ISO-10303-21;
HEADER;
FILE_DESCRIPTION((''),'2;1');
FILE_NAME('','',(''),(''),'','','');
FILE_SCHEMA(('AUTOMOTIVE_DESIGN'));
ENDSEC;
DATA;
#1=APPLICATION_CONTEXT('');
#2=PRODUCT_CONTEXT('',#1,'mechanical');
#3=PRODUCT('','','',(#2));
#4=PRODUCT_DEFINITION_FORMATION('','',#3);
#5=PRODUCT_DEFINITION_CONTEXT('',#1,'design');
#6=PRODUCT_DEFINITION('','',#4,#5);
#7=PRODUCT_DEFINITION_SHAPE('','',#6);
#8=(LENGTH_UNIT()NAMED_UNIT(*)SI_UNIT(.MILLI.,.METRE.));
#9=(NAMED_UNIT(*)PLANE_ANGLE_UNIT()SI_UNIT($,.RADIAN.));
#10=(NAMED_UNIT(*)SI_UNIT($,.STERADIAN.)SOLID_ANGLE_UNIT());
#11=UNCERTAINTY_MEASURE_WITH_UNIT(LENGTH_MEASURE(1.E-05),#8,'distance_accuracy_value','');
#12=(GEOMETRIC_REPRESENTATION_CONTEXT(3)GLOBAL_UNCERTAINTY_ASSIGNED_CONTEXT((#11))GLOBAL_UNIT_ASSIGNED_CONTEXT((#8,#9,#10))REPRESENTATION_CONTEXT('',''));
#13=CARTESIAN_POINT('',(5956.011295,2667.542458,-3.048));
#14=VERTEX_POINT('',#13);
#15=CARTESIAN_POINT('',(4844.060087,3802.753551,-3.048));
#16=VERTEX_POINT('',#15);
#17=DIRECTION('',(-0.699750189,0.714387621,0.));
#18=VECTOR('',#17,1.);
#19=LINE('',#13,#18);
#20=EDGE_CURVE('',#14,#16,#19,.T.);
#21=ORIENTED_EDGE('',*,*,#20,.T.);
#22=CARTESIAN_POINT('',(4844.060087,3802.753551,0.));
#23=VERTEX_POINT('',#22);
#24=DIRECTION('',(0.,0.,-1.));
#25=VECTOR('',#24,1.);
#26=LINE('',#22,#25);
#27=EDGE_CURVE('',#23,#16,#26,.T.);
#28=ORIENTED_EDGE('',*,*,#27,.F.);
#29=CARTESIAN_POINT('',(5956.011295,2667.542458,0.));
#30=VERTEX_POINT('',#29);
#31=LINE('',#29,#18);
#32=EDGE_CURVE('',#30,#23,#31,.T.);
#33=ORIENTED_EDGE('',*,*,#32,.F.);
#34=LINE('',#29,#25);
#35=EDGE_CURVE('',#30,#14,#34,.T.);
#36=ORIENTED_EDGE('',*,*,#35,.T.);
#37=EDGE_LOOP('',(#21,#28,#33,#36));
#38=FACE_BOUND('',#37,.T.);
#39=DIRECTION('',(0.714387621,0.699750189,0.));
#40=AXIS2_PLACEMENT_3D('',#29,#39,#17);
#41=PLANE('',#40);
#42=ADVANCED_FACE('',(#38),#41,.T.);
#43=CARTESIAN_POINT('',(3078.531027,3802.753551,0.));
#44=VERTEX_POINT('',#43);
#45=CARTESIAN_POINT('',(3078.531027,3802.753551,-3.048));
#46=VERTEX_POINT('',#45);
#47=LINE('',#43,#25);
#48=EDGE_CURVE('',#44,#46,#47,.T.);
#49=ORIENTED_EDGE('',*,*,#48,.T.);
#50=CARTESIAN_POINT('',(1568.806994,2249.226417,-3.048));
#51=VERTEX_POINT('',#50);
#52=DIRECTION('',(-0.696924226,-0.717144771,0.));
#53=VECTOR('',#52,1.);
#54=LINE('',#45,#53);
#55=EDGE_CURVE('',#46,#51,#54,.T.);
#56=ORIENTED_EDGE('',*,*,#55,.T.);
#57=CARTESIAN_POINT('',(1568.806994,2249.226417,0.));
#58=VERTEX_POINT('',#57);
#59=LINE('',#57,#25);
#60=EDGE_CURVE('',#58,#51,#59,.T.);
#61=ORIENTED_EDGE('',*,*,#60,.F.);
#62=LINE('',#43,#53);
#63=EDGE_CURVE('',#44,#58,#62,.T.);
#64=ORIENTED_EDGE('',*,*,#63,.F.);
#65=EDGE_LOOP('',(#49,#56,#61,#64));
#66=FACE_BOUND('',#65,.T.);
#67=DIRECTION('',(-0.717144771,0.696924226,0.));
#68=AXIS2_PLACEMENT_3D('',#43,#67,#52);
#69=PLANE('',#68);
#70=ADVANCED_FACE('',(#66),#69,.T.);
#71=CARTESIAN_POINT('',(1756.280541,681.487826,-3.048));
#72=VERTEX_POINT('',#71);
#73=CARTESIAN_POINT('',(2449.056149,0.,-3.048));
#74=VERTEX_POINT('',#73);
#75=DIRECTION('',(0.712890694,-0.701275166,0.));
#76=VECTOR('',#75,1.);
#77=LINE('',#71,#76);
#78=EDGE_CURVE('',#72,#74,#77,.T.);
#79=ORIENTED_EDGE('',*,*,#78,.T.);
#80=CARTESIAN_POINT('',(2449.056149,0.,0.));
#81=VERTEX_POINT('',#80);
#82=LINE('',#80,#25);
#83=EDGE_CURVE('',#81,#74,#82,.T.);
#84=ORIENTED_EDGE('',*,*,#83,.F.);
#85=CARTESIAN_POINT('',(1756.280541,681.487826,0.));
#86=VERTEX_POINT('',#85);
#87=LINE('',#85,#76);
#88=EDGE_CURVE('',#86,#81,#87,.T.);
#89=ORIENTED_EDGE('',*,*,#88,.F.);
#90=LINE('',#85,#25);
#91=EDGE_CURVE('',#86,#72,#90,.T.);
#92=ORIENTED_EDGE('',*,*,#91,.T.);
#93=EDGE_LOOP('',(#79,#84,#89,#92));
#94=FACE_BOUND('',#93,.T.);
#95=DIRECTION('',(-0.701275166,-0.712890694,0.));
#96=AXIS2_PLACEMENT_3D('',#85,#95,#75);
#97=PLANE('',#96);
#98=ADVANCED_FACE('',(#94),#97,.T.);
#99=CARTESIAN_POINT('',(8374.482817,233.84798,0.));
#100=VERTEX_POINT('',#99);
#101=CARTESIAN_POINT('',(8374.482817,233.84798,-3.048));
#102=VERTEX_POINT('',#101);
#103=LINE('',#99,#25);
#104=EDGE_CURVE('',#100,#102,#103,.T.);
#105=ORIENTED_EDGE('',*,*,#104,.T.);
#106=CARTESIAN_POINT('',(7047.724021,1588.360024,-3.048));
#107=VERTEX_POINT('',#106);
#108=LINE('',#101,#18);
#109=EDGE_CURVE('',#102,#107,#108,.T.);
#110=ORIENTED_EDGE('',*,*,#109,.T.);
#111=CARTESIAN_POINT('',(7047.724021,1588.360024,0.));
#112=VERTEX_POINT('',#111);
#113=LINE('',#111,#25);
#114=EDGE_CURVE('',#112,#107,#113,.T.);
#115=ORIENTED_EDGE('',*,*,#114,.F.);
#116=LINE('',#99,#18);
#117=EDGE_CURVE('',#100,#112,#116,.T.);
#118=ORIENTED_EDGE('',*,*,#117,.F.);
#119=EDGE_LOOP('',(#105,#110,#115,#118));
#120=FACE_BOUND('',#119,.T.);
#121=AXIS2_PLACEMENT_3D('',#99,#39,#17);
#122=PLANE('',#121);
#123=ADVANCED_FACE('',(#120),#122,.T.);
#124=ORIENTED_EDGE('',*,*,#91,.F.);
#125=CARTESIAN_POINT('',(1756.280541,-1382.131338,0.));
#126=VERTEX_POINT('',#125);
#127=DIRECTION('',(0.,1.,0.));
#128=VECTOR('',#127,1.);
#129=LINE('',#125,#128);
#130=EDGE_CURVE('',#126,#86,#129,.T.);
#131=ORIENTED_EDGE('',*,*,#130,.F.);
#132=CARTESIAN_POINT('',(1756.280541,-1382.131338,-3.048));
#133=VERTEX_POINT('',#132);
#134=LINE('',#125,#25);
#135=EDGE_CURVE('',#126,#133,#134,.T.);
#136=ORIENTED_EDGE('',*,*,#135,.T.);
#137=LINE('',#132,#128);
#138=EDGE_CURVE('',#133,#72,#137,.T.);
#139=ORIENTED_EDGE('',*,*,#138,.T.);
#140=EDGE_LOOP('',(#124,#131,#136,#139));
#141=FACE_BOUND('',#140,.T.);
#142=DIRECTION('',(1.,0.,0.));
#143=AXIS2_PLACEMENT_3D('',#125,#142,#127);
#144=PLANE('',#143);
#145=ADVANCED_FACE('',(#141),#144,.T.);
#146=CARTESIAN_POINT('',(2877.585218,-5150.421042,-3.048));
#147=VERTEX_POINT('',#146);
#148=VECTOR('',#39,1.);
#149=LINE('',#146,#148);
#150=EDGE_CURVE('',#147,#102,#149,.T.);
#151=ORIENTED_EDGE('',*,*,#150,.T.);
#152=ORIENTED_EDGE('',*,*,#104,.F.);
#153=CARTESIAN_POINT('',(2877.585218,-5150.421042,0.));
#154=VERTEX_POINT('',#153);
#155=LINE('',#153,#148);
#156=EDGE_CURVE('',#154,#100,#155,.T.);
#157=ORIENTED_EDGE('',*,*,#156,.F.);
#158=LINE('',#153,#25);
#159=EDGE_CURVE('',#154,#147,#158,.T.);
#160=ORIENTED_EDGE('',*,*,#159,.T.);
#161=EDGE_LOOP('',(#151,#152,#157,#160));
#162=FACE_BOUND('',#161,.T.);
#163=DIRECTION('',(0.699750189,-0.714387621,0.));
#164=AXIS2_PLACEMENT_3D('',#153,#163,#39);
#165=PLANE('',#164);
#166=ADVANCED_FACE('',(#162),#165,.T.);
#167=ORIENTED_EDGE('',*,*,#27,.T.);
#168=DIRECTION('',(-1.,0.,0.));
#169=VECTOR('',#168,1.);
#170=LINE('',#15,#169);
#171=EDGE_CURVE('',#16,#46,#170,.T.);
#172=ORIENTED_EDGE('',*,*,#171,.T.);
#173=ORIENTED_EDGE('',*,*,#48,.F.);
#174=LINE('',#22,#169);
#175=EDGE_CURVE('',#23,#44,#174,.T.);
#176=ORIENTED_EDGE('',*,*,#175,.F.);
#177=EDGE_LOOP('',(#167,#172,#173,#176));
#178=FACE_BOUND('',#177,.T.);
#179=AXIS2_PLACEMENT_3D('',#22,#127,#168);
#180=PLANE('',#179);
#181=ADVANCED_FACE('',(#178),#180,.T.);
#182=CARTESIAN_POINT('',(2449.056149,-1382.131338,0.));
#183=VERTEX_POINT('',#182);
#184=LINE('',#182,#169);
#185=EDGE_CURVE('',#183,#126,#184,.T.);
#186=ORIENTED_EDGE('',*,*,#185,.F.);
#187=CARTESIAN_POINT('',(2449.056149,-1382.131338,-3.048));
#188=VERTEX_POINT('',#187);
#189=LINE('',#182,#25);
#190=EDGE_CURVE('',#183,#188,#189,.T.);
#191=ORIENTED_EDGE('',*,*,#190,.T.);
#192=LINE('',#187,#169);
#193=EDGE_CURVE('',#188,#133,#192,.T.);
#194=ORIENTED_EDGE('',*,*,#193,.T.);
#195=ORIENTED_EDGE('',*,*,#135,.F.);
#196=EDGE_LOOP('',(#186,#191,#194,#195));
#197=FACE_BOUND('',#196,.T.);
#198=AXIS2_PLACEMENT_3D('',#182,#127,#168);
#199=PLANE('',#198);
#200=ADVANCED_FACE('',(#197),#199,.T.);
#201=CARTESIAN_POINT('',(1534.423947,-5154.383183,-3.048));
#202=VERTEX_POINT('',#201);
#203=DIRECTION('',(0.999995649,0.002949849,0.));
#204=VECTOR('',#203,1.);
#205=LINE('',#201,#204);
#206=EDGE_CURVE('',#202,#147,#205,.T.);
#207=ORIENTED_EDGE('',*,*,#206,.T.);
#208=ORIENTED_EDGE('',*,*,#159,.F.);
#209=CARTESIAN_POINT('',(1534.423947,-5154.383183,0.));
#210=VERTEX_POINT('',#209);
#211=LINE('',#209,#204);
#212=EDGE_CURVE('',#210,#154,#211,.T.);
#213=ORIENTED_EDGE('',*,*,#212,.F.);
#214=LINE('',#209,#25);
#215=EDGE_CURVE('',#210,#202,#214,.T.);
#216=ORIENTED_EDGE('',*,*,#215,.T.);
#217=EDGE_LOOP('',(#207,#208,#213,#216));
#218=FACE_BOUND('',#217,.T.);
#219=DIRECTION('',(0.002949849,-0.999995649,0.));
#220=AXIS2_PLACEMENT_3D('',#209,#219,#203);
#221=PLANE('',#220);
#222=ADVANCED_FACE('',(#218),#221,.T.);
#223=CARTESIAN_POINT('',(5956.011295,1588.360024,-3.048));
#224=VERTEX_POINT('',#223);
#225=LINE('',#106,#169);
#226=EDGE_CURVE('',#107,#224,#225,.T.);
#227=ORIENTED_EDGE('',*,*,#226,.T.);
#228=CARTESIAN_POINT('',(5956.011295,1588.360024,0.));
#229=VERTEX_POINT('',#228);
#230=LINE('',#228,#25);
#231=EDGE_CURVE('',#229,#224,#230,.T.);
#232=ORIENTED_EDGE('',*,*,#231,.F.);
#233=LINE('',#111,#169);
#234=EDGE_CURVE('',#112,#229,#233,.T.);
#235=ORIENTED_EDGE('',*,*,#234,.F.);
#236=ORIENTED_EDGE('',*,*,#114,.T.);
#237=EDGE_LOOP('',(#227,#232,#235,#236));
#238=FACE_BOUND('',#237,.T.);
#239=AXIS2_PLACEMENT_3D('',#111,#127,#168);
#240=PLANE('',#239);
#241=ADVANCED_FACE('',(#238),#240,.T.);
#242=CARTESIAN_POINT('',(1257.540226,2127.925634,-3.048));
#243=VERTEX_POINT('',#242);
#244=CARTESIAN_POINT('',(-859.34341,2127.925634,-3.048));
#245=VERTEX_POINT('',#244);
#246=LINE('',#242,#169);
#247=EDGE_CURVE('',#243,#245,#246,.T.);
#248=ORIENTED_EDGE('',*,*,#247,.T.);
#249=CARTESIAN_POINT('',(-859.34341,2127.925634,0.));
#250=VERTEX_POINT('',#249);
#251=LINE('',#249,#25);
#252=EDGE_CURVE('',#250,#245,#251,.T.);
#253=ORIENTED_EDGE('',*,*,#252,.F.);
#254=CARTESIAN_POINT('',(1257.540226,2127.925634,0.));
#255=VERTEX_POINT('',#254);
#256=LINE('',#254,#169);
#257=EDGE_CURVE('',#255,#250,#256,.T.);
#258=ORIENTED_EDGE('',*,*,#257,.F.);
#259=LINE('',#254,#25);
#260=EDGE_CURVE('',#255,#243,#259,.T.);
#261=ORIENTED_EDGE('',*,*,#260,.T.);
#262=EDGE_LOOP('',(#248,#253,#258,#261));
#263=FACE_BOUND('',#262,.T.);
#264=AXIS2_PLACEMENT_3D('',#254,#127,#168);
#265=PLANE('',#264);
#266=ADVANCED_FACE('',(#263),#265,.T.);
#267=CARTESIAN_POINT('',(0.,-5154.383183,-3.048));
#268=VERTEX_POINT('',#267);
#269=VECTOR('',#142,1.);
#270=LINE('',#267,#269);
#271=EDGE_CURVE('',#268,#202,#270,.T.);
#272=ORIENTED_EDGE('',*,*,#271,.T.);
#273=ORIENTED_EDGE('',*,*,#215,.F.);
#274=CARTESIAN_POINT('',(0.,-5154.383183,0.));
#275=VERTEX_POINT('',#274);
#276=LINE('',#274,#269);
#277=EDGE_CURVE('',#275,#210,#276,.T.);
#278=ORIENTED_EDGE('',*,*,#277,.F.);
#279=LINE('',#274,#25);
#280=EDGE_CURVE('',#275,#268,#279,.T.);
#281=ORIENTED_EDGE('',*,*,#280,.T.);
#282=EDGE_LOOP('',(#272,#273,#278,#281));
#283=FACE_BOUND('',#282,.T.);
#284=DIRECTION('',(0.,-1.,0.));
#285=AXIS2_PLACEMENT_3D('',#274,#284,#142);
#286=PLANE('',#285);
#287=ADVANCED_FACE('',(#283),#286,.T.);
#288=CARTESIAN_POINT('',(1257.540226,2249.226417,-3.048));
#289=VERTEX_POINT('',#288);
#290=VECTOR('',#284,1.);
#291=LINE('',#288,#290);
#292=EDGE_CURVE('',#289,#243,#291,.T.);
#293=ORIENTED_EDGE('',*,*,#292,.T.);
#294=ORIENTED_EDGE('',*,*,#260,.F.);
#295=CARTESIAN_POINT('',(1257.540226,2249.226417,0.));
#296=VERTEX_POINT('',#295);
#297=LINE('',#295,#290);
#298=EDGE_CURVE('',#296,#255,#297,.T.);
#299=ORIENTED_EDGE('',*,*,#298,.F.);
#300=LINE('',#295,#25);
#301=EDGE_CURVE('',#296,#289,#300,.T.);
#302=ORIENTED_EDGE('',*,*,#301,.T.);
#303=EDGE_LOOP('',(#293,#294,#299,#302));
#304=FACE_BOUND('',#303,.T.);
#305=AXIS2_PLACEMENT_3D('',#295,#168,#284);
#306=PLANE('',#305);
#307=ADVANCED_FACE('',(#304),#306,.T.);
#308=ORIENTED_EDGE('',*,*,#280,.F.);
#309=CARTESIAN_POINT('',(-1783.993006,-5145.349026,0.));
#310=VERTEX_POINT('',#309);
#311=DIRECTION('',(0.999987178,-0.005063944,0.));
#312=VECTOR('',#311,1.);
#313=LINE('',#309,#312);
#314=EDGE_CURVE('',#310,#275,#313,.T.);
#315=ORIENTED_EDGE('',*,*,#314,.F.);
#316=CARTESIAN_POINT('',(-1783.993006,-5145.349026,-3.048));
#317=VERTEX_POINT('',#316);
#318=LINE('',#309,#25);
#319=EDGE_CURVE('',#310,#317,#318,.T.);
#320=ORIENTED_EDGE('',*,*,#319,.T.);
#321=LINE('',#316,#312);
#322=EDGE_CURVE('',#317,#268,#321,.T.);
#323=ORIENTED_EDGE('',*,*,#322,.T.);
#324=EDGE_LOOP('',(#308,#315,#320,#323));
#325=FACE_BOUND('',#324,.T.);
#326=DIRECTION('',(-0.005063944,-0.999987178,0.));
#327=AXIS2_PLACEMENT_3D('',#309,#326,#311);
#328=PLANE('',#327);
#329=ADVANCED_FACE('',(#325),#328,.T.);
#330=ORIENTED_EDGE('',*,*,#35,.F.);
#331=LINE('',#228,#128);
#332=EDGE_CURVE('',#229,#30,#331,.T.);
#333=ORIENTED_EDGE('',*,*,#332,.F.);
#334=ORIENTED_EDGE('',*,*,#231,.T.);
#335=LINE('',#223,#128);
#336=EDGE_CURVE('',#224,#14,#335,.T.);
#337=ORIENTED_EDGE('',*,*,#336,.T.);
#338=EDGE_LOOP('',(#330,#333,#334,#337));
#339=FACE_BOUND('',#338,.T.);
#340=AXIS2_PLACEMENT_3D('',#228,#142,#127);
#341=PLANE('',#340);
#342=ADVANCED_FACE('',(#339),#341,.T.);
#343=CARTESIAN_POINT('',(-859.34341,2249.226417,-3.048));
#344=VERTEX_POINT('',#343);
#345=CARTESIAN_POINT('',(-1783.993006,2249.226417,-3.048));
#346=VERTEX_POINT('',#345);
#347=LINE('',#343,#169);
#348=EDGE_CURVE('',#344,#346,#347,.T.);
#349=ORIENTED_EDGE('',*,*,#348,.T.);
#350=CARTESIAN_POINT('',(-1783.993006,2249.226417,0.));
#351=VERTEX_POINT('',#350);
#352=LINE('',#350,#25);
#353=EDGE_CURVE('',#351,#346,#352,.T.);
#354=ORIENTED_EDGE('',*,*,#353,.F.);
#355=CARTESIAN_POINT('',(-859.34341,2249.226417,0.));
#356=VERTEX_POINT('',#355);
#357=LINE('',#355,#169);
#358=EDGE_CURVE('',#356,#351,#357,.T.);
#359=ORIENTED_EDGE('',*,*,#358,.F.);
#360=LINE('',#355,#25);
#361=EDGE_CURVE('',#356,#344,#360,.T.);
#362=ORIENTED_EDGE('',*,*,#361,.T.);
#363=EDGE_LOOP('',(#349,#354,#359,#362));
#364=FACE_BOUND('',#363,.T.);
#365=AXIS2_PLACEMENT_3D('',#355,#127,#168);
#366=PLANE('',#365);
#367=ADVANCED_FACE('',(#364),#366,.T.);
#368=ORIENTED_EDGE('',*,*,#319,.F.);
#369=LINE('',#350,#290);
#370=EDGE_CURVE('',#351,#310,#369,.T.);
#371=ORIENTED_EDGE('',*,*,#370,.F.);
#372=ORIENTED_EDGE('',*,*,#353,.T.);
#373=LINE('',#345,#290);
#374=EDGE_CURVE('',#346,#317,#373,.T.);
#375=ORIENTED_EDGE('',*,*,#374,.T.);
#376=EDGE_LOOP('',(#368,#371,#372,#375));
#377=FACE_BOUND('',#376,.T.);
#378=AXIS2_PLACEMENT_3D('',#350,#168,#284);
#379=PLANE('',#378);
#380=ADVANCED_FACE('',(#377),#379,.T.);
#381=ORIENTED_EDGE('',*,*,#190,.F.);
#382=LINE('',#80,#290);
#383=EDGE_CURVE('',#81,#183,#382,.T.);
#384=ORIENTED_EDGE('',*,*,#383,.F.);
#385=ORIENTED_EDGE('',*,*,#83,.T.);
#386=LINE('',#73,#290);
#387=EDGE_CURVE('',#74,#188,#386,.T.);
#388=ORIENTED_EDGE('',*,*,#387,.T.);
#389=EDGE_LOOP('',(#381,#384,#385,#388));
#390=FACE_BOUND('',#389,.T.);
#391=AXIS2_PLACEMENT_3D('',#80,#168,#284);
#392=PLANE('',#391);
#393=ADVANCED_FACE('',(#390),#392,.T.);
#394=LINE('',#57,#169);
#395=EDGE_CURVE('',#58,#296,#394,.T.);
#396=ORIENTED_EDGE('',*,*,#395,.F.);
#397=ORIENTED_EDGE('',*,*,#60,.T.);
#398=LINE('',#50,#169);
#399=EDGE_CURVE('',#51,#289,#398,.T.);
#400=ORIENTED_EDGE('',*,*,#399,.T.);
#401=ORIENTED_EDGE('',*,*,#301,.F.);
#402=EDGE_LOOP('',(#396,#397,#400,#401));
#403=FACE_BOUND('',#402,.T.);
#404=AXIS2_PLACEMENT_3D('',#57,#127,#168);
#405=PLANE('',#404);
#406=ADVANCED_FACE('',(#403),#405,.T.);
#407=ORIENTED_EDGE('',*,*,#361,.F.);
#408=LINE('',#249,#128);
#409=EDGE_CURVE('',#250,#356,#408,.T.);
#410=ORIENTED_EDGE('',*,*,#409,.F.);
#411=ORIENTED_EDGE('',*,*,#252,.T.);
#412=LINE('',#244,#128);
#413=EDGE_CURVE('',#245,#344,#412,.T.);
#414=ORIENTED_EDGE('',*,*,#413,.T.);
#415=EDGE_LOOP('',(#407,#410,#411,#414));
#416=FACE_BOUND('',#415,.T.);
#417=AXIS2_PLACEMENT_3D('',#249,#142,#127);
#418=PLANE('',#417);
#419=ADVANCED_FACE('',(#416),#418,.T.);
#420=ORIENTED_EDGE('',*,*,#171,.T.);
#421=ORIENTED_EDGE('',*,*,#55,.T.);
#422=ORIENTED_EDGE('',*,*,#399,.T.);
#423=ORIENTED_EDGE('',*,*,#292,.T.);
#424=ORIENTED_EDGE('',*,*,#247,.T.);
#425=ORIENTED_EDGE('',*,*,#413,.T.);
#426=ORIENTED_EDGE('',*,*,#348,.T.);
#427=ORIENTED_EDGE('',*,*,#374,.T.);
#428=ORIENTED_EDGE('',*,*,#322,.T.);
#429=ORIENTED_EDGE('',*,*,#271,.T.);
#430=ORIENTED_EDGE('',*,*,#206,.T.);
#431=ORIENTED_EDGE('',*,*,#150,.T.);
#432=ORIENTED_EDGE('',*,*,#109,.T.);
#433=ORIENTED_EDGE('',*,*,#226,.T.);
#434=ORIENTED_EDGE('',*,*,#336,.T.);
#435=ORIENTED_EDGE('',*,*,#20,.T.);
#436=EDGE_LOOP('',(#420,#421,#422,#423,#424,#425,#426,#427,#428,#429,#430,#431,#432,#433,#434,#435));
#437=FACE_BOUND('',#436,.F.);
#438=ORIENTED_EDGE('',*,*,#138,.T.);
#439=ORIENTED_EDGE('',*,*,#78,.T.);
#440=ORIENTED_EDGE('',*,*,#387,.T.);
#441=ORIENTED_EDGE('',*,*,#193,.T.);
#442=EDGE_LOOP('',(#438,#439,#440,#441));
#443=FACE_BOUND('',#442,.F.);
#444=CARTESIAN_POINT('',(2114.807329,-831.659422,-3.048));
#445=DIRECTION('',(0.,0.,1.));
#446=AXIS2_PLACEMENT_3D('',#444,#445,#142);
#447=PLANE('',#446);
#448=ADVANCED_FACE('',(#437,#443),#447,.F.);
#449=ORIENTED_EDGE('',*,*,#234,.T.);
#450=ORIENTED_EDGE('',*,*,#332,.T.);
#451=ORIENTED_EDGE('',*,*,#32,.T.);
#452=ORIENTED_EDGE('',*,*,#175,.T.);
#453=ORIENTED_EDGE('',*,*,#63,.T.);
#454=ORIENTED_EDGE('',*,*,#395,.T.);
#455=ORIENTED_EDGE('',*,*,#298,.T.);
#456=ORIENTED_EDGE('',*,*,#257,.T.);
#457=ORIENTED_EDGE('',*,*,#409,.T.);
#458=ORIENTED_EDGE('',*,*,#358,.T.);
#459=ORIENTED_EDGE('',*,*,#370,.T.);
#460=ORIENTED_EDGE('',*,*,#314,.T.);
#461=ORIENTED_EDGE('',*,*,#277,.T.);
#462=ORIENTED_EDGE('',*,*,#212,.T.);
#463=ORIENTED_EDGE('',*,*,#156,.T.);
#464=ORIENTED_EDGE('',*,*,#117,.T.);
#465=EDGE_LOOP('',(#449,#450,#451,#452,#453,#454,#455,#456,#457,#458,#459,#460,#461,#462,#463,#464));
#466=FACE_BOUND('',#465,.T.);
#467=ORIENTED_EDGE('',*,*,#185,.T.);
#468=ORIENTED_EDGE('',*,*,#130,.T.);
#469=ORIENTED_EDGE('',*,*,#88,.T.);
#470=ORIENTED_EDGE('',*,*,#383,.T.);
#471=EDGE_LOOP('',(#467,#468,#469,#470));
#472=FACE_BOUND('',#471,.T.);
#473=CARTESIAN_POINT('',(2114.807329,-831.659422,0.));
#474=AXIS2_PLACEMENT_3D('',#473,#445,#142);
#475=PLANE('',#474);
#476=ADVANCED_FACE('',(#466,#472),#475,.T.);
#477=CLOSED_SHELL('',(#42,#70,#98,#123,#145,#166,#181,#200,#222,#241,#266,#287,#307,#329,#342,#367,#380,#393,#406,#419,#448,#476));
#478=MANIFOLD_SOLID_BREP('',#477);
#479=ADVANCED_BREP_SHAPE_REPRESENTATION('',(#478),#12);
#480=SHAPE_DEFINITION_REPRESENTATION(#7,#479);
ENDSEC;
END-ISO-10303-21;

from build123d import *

# Parameters (mm, degrees)
F4_DEPTH = 3.048


# Not quite as in the source:
# - the program builds the solid bodies; features that only make, move or delete a surface that nothing else refers to are left out


with BuildPart() as f4:
    # F0 (on Top) → F4 (new body)
    with BuildSketch(Plane.XY):
        Polygon((-859.3434095383, 2249.2264169165), (-1783.9930057526, 2249.2264169165), (-1783.9930057526, -1707.3482275009), (619.3107366562, -1707.3482275009), (619.3107366562, -2341.3591384888), (0, -2341.3591384888), (-1783.9930057526, -2341.3591384888), (-1783.9930057526, -5145.3490257263), (0, -5154.3831825256), (1534.4239473343, -5154.3831825256), (2877.5852176544, -5150.4210421951), (3421.4589595795, -4617.690990831), (6357.0975280814, -1742.2021322423), (8374.4828170111, 233.8479796617), (7047.7240208756, 1588.3600242488), (5956.0112953186, 1588.3600242488), (5956.0112953186, 2667.5424575806), (4844.0600873968, 3802.7535513455), (3078.5310268402, 3802.7535513455), (1568.8069942474, 2249.2264169165), (1257.5402259827, 2249.2264169165), (1257.5402259827, 2127.9256343842), (-859.3434095383, 2127.9256343842), align=None)
        Polygon((1756.28054142, -1382.1313381195), (1756.28054142, 681.4878258383), (2449.0561485291, 0), (2449.0561485291, -1382.1313381195), align=None, mode=Mode.SUBTRACT)
        Polygon((619.3107366562, -1707.3482275009), (-1783.9930057526, -1707.3482275009), (-1783.9930057526, -2341.3591384888), (0, -2341.3591384888), (619.3107366562, -2341.3591384888), align=None)
    extrude(amount=-F4_DEPTH)


solid = f4.part
